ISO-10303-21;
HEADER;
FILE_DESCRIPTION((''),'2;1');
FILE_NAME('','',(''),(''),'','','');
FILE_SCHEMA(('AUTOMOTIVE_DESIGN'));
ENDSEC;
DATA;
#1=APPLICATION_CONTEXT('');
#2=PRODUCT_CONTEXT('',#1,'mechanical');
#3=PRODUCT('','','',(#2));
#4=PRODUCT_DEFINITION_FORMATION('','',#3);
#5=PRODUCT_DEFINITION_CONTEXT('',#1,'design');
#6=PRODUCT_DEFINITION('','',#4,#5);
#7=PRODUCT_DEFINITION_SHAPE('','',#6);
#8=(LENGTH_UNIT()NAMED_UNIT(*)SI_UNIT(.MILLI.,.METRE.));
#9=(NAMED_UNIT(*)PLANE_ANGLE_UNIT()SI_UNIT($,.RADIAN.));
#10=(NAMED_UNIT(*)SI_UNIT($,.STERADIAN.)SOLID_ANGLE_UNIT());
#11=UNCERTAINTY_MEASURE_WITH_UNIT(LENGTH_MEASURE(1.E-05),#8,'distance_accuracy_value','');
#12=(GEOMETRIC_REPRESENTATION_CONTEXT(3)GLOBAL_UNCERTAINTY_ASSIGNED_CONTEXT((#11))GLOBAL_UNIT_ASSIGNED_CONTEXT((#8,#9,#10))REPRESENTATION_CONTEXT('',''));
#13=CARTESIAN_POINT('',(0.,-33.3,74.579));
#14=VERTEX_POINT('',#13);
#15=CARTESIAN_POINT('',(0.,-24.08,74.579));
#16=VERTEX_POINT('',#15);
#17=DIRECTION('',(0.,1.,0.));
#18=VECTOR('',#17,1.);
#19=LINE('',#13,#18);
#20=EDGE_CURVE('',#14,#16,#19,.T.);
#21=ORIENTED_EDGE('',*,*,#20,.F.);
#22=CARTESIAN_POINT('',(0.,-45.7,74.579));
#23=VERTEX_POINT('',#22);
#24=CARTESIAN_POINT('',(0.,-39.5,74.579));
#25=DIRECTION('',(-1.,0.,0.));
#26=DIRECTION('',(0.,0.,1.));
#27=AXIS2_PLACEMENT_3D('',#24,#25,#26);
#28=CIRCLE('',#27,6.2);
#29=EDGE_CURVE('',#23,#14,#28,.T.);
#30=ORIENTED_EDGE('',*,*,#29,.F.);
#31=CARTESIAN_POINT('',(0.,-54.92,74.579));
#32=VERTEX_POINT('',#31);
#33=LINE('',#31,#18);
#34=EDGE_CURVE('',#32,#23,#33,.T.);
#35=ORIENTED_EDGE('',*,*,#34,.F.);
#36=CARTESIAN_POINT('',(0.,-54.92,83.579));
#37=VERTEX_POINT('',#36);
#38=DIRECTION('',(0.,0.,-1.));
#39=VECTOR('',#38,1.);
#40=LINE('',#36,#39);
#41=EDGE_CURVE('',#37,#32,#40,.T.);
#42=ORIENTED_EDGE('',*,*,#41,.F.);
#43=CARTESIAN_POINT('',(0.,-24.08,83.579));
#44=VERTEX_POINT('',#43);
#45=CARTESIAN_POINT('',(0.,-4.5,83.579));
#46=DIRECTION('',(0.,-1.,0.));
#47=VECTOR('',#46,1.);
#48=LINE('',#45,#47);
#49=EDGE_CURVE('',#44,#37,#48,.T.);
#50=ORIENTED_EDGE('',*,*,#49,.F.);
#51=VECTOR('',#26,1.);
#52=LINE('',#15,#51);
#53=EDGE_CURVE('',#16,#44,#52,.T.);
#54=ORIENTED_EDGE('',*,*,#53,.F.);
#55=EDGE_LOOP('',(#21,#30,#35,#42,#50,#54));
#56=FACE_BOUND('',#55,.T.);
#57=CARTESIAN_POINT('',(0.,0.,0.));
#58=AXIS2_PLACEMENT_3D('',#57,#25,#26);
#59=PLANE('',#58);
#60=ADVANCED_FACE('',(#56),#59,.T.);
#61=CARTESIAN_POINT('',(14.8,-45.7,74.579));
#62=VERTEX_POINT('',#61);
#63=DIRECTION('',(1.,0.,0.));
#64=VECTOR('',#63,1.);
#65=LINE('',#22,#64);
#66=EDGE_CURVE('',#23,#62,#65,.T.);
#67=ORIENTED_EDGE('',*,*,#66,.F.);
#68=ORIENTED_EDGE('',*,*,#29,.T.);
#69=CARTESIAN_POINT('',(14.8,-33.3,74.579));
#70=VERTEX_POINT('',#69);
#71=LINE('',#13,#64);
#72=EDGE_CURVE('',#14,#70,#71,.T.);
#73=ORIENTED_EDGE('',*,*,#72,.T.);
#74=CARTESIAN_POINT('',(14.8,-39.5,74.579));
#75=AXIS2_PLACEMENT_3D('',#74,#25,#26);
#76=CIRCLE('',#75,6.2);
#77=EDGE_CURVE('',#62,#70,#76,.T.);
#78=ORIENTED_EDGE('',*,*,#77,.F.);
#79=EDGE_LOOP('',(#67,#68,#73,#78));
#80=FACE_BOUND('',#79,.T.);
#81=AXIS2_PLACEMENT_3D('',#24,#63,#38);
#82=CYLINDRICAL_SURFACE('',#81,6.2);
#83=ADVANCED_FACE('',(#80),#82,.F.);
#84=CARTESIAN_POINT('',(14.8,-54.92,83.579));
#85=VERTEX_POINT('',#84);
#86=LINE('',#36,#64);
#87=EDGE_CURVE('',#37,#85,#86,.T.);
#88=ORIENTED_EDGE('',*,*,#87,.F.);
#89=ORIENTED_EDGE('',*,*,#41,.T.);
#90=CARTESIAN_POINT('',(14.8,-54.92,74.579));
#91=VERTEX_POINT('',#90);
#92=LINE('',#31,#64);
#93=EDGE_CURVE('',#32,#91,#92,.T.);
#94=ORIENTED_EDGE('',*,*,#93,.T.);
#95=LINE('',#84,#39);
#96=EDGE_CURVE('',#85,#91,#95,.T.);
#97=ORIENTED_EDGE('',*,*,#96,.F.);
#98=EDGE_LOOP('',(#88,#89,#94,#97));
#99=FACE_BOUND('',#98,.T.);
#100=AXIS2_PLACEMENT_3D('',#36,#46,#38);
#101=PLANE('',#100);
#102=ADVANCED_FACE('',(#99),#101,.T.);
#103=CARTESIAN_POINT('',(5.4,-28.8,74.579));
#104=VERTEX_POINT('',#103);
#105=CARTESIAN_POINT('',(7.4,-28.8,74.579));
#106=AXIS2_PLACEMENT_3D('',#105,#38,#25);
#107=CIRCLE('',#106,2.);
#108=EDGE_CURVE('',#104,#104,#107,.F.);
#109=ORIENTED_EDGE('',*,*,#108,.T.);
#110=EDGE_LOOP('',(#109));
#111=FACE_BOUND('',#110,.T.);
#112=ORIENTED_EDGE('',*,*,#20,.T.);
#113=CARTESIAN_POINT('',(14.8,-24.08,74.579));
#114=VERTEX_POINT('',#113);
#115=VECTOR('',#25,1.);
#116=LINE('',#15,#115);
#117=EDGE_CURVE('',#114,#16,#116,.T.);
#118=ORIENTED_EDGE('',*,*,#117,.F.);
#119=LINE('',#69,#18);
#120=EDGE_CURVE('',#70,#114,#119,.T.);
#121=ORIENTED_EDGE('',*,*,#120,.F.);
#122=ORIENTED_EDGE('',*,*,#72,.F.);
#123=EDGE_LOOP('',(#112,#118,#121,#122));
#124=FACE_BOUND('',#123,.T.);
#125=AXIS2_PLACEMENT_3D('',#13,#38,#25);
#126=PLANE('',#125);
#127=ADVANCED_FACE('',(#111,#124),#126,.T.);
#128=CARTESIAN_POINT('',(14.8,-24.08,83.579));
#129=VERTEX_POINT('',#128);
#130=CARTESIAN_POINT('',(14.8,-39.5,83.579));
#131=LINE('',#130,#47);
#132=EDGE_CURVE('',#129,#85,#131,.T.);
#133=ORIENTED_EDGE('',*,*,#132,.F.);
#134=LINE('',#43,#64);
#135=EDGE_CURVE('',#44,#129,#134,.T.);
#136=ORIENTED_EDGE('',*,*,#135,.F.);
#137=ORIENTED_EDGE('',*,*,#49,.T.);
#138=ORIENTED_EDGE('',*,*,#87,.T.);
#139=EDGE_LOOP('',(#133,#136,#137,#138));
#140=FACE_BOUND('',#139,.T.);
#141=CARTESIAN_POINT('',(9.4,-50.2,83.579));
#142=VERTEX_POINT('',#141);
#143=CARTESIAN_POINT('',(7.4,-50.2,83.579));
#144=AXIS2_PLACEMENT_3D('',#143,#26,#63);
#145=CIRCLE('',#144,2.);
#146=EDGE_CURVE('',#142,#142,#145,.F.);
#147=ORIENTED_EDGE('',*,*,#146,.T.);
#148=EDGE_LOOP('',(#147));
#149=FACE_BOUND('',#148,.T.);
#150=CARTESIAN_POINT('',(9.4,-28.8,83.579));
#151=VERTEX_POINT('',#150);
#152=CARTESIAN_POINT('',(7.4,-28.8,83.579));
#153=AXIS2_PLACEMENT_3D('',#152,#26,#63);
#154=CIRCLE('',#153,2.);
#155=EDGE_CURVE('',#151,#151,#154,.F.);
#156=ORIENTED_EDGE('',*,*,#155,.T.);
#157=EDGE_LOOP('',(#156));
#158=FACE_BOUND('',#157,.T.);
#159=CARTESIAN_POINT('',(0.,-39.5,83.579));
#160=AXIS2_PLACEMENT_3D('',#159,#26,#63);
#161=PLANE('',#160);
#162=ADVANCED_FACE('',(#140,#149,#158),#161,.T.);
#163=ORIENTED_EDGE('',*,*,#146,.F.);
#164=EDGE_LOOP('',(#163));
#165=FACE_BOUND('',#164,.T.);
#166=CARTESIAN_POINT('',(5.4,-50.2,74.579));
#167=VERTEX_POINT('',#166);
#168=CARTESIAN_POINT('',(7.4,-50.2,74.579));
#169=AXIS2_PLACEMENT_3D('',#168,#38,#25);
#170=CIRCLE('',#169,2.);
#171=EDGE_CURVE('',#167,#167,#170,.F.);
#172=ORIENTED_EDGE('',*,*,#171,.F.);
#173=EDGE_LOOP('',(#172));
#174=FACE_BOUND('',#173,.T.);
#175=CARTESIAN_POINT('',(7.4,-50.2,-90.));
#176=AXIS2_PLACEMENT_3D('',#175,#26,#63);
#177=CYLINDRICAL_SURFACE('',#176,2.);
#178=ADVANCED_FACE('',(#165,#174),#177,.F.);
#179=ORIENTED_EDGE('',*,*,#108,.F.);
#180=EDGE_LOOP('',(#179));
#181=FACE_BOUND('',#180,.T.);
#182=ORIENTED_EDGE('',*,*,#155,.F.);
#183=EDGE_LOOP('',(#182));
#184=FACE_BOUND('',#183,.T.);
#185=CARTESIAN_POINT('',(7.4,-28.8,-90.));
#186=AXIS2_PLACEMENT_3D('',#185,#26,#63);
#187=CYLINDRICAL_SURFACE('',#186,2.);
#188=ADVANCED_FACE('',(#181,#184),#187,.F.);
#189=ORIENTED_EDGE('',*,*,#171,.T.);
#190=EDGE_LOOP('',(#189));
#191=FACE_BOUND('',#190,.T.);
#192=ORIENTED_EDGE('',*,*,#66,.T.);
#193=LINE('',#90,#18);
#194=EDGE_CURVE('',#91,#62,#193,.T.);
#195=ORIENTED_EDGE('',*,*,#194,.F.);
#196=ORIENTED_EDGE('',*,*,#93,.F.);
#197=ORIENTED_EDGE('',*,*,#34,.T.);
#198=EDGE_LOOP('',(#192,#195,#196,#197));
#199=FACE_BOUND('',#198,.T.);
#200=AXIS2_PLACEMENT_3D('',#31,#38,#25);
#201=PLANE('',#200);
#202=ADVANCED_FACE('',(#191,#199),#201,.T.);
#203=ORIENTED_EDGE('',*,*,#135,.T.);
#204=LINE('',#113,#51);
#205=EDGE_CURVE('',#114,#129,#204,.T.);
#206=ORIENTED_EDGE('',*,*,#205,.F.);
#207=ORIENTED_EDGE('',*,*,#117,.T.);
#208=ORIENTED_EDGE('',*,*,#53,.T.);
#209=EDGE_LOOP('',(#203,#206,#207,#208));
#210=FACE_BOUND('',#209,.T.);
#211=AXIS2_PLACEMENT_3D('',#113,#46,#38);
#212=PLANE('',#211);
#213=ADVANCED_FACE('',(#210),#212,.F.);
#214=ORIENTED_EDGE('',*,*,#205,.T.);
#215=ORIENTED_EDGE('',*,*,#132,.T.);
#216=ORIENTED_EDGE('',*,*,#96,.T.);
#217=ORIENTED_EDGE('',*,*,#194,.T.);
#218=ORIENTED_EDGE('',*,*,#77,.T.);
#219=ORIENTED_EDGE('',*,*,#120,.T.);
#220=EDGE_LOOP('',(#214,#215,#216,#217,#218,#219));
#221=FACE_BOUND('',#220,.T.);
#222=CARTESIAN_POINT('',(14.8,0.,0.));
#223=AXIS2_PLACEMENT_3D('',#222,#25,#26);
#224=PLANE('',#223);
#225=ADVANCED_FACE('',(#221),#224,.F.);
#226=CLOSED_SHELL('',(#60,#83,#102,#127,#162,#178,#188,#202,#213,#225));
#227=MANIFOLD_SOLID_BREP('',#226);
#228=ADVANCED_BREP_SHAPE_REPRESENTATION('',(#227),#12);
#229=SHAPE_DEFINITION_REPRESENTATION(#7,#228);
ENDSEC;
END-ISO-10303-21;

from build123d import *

# Parameters (mm, degrees)
SKETCH2_W               = 180
SKETCH2_H               = 9
BOSS_EXTRUDE1_DEPTH     = 14.8
SKETCH7_W               = 90
SKETCH7_H               = 4.5
CUT_EXTRUDE1_DEPTH      = 92.319713096
FILLET1_R               = 8
BOSS_EXTRUDE2_DEPTH     = 14.8
CUT_EXTRUDE2_DEPTH      = 175.130679781
CUT_EXTRUDE2_DEPTH_BACK = 175.130679781
SKETCH11_R              = 2
CUT_EXTRUDE3_DEPTH      = 107.467114171
CUT_EXTRUDE3_DEPTH_BACK = 107.467114171


with BuildPart() as part:
    # Sketch2 → Boss-Extrude1 (new body)
    with BuildSketch(Plane(origin=(0, 0, 0), x_dir=(0, 0, -1), z_dir=(1, 0, 0))):
        Rectangle(SKETCH2_W, SKETCH2_H)
    extrude(amount=BOSS_EXTRUDE1_DEPTH)

    # Sketch7 → Cut-Extrude1 (cut, through all)
    with BuildSketch(Plane(origin=(14.8, 0, 0), x_dir=(0, 0, -1), z_dir=(1, 0, 0))):
        with Locations((0, -2.25)):
            Rectangle(SKETCH7_W, SKETCH7_H)
    extrude(amount=-CUT_EXTRUDE1_DEPTH, mode=Mode.SUBTRACT)

    # Fillet1
    # the kernel refuses this fillet: 8 mm, written as the material it adds along each edge
    with BuildSketch(Plane(origin=(14.8, 0, -45), x_dir=(0, -1, 0), z_dir=(-1, 0, 0))) as fillet1_piece_1:
        with BuildLine():
            CenterArc((8, 7.193747285), FILLET1_R, 180, 64.055520228)
            Line((0, 7.193747285), (-0.16, 7.193747285))
            Line((-0.16, 7.193747285), (-0.16, 0))
            Line((-0.16, 0), (0, -0.16))
            ThreePointArc((0, -0.16), (2.25, -0.16), (4.43, -0.143874946))
            Line((4.43, -0.143874946), (4.5, 0))
        make_face()
    extrude(amount=14.8)
    with BuildSketch(Plane(origin=(14.8, 0, 45), x_dir=(0, -1, 0), z_dir=(-1, 0, 0))) as fillet1_piece_2:
        with BuildLine():
            CenterArc((8, -7.193747285), FILLET1_R, 115.944479772, 64.055520228)
            Line((0, -7.193747285), (-0.16, -7.193747285))
            Line((-0.16, -7.193747285), (-0.16, 0))
            Line((-0.16, 0), (0, 0.16))
            ThreePointArc((0, 0.16), (2.25, 0.16), (4.43, 0.143874946))
            Line((4.43, 0.143874946), (4.5, 0))
        make_face()
    extrude(amount=14.8)

    # Sketch8 → Boss-Extrude2 (add)
    with BuildSketch(Plane(origin=(14.8, 0, 0), x_dir=(0, 0, -1), z_dir=(1, 0, 0))):
        with BuildLine():
            Line((83.579, -39.5), (83.579, -54.92))
            Line((83.579, -54.92), (74.579, -54.92))
            Line((74.579, -54.92), (74.579, -45.7))
            ThreePointArc((74.579, -45.7), (80.779, -39.5), (74.579, -33.3))
            Line((74.579, -33.3), (74.579, -4.5))
            Line((74.579, -4.5), (83.579, -4.5))
            Line((83.579, -4.5), (83.579, -39.5))
        make_face()
        with BuildLine():
            Line((-74.579, -54.92), (-74.579, -45.7))
            ThreePointArc((-74.579, -45.7), (-80.779, -39.5), (-74.579, -33.3))
            Line((-74.579, -33.3), (-74.579, -4.5))
            Line((-74.579, -4.5), (-83.579, -4.5))
            Line((-83.579, -4.5), (-83.579, -39.5))
            Line((-83.579, -39.5), (-83.579, -54.92))
            Line((-83.579, -54.92), (-74.579, -54.92))
        make_face()
    extrude(amount=-BOSS_EXTRUDE2_DEPTH)

    # Sketch11 → Cut-Extrude2 (cut, two sides: drawn at the far end of the back side and taken through both)
    with BuildSketch(Plane(origin=(0, 0, 74.579), x_dir=(-1, 0, 0), z_dir=(0, 0, -1)).offset(-CUT_EXTRUDE2_DEPTH_BACK)):
        with Locations(Location((-7.4, -28.8, 0), (0, 0, 180))):
            Circle(SKETCH11_R)
        with Locations(Location((-7.4, -50.2, 0), (0, 0, 180))):
            Circle(SKETCH11_R)
    extrude(amount=CUT_EXTRUDE2_DEPTH + CUT_EXTRUDE2_DEPTH_BACK, mode=Mode.SUBTRACT)

    # Sketch12 → Cut-Extrude3 (cut, two sides: drawn at the far end of the back side and taken through both)
    with BuildSketch(Plane.ZY.offset(-CUT_EXTRUDE3_DEPTH_BACK)):
        Polygon((96.986162818, 8.741450318), (-95.153164269, 8.741450318), (-95.153164269, -16.038890922), (-95.153164269, -24.08), (-95.153164269, -55.626735024), (-68.956122855, -55.626735024), (-68.956122855, -24.08), (74.579, -24.08), (96.986162818, -24.08), (96.986162818, -16.038890922), (96.986162818, -4.5), align=None)
    extrude(amount=CUT_EXTRUDE3_DEPTH + CUT_EXTRUDE3_DEPTH_BACK, mode=Mode.SUBTRACT)


solid = part.part
